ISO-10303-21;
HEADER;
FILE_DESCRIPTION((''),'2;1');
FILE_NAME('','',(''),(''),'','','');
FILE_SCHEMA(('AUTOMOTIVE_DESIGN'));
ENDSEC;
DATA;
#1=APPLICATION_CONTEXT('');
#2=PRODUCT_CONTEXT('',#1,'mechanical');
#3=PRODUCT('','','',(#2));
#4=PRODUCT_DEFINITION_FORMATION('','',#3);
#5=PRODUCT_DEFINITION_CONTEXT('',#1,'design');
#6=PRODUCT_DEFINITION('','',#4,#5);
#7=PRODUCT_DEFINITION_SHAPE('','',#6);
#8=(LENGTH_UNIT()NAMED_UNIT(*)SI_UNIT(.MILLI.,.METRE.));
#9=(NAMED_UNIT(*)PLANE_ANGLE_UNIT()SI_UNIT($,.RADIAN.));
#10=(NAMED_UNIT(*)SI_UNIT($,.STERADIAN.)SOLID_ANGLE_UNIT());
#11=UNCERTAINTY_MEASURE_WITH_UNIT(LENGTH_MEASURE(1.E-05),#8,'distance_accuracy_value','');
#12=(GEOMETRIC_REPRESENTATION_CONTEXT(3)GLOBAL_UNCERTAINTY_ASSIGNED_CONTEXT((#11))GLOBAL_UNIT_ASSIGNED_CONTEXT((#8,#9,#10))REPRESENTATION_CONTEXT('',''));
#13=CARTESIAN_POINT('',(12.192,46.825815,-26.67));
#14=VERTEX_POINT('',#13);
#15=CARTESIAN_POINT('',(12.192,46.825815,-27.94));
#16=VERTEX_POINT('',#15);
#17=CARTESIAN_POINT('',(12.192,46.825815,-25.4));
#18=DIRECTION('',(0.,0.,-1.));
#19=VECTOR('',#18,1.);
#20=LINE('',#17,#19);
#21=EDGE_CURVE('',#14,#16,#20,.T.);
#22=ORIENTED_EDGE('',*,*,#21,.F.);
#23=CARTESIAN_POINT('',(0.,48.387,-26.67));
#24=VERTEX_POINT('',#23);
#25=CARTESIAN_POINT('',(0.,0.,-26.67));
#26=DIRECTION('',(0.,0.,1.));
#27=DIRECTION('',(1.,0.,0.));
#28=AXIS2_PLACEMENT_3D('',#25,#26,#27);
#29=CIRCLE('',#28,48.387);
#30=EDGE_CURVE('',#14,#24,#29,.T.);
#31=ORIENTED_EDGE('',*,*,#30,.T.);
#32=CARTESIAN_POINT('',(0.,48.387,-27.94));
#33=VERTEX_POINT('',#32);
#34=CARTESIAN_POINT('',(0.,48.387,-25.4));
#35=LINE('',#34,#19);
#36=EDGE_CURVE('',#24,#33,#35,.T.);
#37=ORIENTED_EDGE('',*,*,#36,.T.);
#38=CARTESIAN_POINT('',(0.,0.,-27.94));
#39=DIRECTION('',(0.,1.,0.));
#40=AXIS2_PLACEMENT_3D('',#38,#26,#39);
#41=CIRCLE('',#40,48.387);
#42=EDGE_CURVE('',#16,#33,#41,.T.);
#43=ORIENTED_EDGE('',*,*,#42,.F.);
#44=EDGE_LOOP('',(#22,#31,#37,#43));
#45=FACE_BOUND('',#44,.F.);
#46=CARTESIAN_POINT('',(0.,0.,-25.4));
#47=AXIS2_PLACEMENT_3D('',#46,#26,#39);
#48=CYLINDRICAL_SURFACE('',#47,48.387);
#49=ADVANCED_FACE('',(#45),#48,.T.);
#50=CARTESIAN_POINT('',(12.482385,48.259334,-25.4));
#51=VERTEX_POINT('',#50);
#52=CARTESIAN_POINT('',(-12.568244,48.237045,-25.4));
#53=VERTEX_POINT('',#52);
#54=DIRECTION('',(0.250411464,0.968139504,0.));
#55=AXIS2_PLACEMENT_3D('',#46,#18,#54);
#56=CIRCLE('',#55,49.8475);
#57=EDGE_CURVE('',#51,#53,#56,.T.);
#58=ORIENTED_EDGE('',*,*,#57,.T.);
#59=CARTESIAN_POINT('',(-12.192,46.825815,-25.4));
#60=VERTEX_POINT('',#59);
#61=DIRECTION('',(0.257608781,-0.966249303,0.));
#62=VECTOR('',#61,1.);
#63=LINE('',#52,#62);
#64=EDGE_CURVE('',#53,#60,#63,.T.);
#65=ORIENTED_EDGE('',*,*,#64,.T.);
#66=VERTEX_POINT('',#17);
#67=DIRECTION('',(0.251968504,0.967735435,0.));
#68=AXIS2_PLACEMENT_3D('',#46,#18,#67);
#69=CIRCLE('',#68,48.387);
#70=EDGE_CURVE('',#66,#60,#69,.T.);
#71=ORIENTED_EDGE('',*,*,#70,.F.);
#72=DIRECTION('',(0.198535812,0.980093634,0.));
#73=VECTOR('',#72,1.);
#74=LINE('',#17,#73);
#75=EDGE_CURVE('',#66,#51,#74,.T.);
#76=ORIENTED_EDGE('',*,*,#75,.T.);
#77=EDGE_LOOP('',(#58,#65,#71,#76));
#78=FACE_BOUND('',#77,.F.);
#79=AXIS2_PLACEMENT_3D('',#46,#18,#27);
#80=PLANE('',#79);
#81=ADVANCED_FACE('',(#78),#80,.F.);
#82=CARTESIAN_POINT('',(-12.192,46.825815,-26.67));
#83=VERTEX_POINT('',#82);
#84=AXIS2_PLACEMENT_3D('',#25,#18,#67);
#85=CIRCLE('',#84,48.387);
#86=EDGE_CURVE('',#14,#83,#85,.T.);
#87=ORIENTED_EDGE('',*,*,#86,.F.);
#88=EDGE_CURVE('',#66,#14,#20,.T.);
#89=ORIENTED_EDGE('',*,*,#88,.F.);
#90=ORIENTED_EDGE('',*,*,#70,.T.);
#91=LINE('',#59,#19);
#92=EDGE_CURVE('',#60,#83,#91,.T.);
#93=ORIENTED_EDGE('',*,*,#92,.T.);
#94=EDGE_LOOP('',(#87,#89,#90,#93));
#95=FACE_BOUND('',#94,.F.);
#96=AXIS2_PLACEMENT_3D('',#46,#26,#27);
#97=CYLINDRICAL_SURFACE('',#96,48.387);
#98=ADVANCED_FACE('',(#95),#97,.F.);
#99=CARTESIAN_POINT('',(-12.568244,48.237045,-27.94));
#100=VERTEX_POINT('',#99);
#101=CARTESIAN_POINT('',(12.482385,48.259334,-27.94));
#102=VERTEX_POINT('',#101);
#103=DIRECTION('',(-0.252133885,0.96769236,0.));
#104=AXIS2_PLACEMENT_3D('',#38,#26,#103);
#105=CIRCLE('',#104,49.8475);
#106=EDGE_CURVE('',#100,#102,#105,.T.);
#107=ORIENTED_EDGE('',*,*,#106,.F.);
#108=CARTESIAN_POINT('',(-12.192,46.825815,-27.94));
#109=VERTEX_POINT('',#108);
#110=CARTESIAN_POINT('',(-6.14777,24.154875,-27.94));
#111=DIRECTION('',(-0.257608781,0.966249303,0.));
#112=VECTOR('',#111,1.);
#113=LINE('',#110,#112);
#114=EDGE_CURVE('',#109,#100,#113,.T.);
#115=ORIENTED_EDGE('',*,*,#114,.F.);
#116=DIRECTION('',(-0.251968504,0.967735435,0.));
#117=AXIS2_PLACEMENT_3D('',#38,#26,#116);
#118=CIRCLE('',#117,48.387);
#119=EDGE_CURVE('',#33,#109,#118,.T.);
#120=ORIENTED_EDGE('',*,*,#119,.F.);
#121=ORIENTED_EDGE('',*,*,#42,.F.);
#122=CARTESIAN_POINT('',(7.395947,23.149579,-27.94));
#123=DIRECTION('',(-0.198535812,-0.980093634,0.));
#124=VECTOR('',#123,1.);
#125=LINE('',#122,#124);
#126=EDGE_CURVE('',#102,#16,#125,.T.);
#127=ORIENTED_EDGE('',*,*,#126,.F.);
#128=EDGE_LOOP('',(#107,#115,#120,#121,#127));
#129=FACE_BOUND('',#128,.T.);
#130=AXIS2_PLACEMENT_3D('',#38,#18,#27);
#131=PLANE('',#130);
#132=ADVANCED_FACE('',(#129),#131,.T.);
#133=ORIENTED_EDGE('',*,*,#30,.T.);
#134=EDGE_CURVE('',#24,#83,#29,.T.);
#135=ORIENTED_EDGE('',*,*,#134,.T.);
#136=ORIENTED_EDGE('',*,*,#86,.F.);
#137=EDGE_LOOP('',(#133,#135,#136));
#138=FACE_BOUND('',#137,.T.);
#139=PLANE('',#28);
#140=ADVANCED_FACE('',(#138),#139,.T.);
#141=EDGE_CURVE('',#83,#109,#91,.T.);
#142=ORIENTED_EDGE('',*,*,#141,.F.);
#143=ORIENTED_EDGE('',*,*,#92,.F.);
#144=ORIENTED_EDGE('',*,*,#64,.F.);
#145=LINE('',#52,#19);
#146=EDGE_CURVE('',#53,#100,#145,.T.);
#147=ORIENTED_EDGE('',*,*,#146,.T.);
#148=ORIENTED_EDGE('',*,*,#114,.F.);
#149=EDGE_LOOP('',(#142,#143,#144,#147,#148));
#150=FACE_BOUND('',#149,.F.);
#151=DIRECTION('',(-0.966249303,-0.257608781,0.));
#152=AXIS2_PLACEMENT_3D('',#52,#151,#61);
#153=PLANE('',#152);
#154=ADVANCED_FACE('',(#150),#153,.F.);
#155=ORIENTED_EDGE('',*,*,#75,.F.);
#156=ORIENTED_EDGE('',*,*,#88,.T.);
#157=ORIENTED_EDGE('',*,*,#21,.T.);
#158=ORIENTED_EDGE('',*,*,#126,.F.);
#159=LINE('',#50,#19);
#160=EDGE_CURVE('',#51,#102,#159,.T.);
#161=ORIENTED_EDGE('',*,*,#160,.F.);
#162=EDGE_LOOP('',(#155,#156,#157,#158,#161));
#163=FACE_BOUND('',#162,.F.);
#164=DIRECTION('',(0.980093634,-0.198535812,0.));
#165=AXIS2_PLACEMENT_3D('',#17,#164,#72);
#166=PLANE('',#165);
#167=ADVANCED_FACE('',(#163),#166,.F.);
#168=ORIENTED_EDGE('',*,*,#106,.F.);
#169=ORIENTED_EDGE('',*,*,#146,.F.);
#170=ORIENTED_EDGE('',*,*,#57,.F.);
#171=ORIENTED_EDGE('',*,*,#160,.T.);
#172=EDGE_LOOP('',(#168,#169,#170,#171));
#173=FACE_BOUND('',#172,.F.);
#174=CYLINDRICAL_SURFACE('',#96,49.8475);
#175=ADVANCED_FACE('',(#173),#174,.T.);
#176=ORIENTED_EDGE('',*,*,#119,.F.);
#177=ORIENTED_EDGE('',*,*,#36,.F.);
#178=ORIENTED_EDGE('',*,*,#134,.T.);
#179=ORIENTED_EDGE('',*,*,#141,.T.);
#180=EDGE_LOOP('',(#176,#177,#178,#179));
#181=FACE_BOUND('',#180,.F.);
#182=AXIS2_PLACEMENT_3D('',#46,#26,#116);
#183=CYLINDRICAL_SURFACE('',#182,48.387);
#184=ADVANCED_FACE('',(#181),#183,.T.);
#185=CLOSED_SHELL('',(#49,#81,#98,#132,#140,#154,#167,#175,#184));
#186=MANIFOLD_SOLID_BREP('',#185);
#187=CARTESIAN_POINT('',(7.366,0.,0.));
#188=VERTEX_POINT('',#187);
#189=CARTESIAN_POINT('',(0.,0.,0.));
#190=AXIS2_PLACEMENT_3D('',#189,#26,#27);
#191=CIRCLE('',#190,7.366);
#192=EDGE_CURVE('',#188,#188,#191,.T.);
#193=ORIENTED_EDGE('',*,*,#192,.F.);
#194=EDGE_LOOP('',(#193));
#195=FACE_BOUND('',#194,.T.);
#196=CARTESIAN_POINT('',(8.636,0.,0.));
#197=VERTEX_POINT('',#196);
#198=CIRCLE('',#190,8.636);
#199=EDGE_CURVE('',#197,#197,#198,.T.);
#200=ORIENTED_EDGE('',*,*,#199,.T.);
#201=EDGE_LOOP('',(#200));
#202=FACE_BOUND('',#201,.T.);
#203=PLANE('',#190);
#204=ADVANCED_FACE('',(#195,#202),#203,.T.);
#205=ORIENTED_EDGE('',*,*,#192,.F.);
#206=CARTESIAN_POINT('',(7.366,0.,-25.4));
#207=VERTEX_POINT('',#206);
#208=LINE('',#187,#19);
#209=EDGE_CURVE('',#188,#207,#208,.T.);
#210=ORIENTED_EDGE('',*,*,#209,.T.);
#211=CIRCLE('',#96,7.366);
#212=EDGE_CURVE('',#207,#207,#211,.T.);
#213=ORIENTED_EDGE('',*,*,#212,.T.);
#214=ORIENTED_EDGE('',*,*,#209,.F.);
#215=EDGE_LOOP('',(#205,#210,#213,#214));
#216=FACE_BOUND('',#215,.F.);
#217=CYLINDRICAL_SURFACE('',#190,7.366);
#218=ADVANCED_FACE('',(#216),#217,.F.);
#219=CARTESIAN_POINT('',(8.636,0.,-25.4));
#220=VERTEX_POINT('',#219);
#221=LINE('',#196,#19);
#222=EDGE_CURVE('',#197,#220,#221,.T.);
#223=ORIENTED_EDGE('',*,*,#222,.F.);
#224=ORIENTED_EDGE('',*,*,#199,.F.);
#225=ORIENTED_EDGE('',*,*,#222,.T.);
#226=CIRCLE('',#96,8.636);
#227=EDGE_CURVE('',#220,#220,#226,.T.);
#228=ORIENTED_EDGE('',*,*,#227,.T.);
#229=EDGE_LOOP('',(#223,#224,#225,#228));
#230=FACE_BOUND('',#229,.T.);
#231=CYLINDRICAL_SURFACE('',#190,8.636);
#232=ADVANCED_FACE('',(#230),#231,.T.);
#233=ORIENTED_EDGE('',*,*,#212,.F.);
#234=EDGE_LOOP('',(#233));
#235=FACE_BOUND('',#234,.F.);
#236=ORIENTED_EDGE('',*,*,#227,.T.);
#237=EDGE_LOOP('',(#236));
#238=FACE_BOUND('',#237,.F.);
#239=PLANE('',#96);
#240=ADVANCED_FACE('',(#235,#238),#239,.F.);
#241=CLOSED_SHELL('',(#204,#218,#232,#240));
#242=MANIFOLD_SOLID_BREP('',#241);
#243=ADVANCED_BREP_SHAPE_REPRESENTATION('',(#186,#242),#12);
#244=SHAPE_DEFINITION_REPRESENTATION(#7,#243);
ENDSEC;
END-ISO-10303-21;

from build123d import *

# Parameters (mm, degrees)
F0_R     = 8.636
F0_R_2   = 7.366
F1_DEPTH = 25.4
F2_R     = 49.8475
F2_R_2   = 8.636
F2_R_3   = 7.366
F3_DEPTH = 2.54
F4_R     = 48.387
F5_DEPTH = 1.27
F7_DEPTH = 25.4


# Not quite as in the source:
# - a feature names something its author has since deleted; it is built from what else it names


with BuildPart() as f1:
    # F0 (on Top) → F1 (new body)
    with BuildSketch(Plane.XY):
        Circle(F0_R)
        Circle(F0_R_2, mode=Mode.SUBTRACT)
    extrude(amount=-F1_DEPTH)


with BuildPart() as f3:
    # F2 (on face) → F3 (new body)
    with BuildSketch(Plane(origin=(0, 0, -25.4), x_dir=(1, 0, 0), z_dir=(0, 0, -1))):
        Circle(F2_R)
        Circle(F2_R_2, mode=Mode.SUBTRACT)
        Circle(F2_R_2)
        Circle(F2_R_3, mode=Mode.SUBTRACT)
        Circle(F2_R_3)
    extrude(amount=F3_DEPTH)

    # F4 (on face) → F5 (cut)
    with BuildSketch(Plane.XY.offset(-25.4)):
        Circle(F4_R)
    extrude(amount=-F5_DEPTH, mode=Mode.SUBTRACT)

    # F6 (on face) → F7 (cut)
    with BuildSketch(Plane.XY.offset(-25.4)):
        with BuildLine():
            ThreePointArc((-12.192, 46.8258145151), (-6.1457742417, 47.9951167096), (0, 48.387))
            ThreePointArc((0, 48.387), (6.1457742417, 47.9951167096), (12.192, 46.8258145151))
            Line((12.192, 46.8258145151), (12.4823854572, 48.2593339112))
            ThreePointArc((12.4823854572, 48.2593339112), (-0.0443521709, 49.8474802687), (-12.5682438369, 48.2370449251))
            Line((-12.5682438369, 48.2370449251), (-12.192, 46.8258145151))
        make_face()
    extrude(amount=-F7_DEPTH, mode=Mode.SUBTRACT)


solid = Compound([f1.part, f3.part])
